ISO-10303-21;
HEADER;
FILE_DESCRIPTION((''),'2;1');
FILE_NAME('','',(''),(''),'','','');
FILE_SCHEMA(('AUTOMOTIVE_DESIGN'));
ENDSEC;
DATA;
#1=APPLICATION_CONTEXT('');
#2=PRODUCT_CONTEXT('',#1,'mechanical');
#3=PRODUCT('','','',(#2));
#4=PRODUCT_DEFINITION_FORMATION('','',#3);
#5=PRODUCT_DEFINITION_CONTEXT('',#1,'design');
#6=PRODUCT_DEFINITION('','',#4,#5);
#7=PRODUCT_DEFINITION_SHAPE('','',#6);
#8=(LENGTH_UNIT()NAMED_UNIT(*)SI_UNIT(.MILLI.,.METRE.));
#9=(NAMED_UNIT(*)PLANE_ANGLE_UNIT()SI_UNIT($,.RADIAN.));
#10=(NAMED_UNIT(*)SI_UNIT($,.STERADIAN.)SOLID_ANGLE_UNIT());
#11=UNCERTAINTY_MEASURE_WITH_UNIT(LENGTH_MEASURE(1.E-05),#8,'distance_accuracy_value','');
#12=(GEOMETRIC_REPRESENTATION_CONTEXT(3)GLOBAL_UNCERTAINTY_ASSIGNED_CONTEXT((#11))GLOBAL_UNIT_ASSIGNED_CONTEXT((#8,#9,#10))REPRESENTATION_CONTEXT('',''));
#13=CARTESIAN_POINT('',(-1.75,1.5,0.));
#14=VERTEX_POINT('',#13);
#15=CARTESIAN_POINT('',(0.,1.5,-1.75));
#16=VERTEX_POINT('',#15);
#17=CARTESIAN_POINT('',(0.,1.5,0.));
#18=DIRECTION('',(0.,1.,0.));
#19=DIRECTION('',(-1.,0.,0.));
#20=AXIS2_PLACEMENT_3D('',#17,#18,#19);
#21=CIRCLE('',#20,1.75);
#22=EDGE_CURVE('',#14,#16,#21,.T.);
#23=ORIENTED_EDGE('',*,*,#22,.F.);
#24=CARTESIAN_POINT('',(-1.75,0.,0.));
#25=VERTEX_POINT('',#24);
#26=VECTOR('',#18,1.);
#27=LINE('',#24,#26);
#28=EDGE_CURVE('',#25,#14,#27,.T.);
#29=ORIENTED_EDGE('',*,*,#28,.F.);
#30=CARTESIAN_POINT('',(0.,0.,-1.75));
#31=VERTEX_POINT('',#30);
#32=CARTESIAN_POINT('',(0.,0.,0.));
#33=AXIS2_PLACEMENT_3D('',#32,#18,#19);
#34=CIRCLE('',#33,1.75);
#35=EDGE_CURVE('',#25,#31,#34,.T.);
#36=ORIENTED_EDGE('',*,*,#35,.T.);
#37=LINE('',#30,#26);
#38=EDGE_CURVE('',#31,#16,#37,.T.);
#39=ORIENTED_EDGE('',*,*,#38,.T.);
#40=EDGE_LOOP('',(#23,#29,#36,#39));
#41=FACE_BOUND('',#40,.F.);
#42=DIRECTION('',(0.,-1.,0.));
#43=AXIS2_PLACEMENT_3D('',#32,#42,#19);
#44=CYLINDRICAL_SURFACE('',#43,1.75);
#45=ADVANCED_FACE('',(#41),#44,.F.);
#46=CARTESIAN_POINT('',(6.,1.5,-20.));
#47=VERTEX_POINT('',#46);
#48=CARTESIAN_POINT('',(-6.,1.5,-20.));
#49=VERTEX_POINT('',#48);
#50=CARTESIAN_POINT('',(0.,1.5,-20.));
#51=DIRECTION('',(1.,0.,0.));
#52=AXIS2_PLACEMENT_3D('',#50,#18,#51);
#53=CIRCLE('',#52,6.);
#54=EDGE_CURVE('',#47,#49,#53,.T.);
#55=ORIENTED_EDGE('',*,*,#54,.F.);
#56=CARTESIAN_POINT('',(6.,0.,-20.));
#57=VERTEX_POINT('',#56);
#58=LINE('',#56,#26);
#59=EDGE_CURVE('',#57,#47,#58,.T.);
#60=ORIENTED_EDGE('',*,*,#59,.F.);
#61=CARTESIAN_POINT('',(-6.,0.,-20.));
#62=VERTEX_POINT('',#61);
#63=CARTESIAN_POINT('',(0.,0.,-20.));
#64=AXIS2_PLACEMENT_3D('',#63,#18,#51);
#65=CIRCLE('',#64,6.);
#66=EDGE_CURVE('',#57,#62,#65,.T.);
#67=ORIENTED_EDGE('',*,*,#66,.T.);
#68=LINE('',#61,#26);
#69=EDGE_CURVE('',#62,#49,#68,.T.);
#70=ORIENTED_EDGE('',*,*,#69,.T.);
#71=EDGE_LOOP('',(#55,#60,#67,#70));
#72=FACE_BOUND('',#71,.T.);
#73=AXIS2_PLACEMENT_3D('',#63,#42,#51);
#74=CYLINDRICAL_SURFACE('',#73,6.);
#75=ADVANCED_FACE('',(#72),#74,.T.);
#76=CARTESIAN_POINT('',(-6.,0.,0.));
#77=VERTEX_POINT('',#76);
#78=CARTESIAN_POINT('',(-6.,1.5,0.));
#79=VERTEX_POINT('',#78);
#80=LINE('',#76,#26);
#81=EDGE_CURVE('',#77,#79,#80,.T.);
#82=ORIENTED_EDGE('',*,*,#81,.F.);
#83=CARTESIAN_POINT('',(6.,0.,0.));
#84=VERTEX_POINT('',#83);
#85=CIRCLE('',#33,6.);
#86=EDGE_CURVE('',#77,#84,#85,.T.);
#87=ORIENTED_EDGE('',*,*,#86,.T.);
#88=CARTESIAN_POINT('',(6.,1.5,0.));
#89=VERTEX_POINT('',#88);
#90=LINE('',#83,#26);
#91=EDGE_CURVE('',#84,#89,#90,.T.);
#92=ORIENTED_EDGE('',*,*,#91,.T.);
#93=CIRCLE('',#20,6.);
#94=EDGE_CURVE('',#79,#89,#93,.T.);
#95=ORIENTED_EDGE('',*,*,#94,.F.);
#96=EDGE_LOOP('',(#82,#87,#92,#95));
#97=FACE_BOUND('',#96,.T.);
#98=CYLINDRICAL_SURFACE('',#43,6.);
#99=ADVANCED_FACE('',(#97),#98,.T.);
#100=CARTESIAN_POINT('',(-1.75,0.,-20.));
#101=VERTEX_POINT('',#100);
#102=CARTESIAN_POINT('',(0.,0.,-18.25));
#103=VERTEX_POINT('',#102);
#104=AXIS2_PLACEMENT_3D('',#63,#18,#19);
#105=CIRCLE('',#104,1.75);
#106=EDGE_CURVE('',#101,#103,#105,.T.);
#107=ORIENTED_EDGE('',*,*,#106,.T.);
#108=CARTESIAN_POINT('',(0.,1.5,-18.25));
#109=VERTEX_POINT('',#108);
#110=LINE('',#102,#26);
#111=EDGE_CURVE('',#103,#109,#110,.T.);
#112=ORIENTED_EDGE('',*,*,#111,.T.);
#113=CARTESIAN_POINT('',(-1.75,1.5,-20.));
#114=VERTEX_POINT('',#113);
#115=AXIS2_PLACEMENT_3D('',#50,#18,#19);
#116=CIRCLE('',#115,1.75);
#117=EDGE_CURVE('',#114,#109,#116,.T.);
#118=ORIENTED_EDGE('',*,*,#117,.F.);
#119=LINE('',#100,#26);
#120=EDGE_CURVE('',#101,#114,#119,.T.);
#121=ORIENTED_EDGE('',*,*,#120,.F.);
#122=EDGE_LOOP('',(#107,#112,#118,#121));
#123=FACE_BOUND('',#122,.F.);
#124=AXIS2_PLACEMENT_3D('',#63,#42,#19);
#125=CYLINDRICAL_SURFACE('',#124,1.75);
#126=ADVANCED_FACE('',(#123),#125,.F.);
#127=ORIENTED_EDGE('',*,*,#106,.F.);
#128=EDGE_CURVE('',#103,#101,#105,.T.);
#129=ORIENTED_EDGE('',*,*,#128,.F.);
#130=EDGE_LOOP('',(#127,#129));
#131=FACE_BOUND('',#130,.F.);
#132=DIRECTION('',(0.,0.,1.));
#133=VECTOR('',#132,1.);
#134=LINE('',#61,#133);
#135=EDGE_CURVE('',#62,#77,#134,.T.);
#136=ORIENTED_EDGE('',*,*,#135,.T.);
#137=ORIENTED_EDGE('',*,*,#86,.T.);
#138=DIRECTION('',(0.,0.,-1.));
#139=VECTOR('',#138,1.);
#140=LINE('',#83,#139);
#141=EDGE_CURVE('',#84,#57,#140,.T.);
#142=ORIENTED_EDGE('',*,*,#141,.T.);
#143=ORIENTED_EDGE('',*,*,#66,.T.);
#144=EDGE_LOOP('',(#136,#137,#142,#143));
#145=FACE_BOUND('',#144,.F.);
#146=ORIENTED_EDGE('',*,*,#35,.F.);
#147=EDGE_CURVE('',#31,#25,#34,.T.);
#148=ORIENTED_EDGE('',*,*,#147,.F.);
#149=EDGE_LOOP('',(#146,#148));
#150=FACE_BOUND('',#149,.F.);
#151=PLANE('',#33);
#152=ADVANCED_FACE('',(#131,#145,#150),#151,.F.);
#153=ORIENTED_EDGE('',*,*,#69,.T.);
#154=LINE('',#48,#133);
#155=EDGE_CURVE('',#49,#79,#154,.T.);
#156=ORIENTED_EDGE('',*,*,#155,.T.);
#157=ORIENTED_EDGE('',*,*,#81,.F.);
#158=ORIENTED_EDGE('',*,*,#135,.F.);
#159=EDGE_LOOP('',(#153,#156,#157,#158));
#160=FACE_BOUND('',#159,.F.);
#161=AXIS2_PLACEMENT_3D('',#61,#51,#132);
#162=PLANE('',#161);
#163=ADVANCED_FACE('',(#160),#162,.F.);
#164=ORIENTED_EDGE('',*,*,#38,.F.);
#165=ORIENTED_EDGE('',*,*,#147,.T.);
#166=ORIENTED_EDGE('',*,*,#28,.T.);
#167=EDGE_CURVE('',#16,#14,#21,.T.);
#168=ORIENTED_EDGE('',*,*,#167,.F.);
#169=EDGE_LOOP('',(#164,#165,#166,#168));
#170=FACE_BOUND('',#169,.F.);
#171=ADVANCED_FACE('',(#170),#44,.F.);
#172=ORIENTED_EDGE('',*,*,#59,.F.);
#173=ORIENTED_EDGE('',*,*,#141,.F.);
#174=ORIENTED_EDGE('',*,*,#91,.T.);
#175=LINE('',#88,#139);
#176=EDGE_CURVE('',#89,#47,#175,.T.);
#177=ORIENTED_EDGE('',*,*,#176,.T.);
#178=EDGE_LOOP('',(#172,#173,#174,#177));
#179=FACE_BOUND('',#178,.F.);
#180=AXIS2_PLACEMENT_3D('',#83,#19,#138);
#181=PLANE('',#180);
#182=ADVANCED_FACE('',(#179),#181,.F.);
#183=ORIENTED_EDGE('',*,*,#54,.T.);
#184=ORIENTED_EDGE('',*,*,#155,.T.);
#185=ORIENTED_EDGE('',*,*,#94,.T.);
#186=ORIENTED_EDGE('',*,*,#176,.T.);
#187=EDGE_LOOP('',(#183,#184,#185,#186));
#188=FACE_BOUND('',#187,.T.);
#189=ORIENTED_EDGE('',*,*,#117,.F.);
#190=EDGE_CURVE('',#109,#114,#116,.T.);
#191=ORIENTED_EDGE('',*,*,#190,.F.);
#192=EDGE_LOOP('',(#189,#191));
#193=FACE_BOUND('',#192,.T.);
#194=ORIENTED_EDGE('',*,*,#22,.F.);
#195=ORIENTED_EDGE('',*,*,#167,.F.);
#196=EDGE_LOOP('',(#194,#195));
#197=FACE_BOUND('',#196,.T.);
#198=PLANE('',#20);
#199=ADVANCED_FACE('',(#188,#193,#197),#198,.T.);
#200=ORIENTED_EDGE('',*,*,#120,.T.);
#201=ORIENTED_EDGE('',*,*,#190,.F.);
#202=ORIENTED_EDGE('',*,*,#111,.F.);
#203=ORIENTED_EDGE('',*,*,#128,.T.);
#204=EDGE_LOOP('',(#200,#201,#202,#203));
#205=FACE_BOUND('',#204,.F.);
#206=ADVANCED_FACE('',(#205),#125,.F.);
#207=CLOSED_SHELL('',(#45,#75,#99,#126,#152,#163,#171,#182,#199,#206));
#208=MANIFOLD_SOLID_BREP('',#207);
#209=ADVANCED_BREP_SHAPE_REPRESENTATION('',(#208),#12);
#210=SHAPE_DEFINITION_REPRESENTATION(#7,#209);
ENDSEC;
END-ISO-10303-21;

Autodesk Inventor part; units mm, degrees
ref_plane "YZ Plane" through (0, 0, 0) normal (1, 0, 0) x (0, 1, 0)
ref_plane "XZ Plane" through (0, 0, 0) normal (0, 1, 0) x (-1, 0, 0)
ref_plane "XY Plane" through (0, 0, 0) normal (0, 0, 1) x (1, 0, 0)
sketch "Sketch1" plane through (0, 0, 0) normal (0, 1, 0) x (-1, 0, 0)
  line L0 (0, 0) -> (0, -20)
  circle A0 centre (0, 0) radius 1.75
  circle A1 centre (0, -20) radius 1.75
  line L1 (0, 0) -> (0, -20) construction
  line L2 (-6, 0) -> (-6, -20)
  line L3 (6, -20) -> (6, 0)
  arc A2 (6, 0) -> (-6, 0) centre (0, 0) ccw
  arc A3 (-6, -20) -> (6, -20) centre (0, -20) ccw
  point P0 (0, -10)
  dimension "d0" = 20
  dimension "d1" = 3.5
  dimension "d2" = 3.5
  dimension "d3" = 12
extrude "Extrusion1" add sketch "Sketch1" along normal blind 1.5
properties part number "LRF Clamp"
